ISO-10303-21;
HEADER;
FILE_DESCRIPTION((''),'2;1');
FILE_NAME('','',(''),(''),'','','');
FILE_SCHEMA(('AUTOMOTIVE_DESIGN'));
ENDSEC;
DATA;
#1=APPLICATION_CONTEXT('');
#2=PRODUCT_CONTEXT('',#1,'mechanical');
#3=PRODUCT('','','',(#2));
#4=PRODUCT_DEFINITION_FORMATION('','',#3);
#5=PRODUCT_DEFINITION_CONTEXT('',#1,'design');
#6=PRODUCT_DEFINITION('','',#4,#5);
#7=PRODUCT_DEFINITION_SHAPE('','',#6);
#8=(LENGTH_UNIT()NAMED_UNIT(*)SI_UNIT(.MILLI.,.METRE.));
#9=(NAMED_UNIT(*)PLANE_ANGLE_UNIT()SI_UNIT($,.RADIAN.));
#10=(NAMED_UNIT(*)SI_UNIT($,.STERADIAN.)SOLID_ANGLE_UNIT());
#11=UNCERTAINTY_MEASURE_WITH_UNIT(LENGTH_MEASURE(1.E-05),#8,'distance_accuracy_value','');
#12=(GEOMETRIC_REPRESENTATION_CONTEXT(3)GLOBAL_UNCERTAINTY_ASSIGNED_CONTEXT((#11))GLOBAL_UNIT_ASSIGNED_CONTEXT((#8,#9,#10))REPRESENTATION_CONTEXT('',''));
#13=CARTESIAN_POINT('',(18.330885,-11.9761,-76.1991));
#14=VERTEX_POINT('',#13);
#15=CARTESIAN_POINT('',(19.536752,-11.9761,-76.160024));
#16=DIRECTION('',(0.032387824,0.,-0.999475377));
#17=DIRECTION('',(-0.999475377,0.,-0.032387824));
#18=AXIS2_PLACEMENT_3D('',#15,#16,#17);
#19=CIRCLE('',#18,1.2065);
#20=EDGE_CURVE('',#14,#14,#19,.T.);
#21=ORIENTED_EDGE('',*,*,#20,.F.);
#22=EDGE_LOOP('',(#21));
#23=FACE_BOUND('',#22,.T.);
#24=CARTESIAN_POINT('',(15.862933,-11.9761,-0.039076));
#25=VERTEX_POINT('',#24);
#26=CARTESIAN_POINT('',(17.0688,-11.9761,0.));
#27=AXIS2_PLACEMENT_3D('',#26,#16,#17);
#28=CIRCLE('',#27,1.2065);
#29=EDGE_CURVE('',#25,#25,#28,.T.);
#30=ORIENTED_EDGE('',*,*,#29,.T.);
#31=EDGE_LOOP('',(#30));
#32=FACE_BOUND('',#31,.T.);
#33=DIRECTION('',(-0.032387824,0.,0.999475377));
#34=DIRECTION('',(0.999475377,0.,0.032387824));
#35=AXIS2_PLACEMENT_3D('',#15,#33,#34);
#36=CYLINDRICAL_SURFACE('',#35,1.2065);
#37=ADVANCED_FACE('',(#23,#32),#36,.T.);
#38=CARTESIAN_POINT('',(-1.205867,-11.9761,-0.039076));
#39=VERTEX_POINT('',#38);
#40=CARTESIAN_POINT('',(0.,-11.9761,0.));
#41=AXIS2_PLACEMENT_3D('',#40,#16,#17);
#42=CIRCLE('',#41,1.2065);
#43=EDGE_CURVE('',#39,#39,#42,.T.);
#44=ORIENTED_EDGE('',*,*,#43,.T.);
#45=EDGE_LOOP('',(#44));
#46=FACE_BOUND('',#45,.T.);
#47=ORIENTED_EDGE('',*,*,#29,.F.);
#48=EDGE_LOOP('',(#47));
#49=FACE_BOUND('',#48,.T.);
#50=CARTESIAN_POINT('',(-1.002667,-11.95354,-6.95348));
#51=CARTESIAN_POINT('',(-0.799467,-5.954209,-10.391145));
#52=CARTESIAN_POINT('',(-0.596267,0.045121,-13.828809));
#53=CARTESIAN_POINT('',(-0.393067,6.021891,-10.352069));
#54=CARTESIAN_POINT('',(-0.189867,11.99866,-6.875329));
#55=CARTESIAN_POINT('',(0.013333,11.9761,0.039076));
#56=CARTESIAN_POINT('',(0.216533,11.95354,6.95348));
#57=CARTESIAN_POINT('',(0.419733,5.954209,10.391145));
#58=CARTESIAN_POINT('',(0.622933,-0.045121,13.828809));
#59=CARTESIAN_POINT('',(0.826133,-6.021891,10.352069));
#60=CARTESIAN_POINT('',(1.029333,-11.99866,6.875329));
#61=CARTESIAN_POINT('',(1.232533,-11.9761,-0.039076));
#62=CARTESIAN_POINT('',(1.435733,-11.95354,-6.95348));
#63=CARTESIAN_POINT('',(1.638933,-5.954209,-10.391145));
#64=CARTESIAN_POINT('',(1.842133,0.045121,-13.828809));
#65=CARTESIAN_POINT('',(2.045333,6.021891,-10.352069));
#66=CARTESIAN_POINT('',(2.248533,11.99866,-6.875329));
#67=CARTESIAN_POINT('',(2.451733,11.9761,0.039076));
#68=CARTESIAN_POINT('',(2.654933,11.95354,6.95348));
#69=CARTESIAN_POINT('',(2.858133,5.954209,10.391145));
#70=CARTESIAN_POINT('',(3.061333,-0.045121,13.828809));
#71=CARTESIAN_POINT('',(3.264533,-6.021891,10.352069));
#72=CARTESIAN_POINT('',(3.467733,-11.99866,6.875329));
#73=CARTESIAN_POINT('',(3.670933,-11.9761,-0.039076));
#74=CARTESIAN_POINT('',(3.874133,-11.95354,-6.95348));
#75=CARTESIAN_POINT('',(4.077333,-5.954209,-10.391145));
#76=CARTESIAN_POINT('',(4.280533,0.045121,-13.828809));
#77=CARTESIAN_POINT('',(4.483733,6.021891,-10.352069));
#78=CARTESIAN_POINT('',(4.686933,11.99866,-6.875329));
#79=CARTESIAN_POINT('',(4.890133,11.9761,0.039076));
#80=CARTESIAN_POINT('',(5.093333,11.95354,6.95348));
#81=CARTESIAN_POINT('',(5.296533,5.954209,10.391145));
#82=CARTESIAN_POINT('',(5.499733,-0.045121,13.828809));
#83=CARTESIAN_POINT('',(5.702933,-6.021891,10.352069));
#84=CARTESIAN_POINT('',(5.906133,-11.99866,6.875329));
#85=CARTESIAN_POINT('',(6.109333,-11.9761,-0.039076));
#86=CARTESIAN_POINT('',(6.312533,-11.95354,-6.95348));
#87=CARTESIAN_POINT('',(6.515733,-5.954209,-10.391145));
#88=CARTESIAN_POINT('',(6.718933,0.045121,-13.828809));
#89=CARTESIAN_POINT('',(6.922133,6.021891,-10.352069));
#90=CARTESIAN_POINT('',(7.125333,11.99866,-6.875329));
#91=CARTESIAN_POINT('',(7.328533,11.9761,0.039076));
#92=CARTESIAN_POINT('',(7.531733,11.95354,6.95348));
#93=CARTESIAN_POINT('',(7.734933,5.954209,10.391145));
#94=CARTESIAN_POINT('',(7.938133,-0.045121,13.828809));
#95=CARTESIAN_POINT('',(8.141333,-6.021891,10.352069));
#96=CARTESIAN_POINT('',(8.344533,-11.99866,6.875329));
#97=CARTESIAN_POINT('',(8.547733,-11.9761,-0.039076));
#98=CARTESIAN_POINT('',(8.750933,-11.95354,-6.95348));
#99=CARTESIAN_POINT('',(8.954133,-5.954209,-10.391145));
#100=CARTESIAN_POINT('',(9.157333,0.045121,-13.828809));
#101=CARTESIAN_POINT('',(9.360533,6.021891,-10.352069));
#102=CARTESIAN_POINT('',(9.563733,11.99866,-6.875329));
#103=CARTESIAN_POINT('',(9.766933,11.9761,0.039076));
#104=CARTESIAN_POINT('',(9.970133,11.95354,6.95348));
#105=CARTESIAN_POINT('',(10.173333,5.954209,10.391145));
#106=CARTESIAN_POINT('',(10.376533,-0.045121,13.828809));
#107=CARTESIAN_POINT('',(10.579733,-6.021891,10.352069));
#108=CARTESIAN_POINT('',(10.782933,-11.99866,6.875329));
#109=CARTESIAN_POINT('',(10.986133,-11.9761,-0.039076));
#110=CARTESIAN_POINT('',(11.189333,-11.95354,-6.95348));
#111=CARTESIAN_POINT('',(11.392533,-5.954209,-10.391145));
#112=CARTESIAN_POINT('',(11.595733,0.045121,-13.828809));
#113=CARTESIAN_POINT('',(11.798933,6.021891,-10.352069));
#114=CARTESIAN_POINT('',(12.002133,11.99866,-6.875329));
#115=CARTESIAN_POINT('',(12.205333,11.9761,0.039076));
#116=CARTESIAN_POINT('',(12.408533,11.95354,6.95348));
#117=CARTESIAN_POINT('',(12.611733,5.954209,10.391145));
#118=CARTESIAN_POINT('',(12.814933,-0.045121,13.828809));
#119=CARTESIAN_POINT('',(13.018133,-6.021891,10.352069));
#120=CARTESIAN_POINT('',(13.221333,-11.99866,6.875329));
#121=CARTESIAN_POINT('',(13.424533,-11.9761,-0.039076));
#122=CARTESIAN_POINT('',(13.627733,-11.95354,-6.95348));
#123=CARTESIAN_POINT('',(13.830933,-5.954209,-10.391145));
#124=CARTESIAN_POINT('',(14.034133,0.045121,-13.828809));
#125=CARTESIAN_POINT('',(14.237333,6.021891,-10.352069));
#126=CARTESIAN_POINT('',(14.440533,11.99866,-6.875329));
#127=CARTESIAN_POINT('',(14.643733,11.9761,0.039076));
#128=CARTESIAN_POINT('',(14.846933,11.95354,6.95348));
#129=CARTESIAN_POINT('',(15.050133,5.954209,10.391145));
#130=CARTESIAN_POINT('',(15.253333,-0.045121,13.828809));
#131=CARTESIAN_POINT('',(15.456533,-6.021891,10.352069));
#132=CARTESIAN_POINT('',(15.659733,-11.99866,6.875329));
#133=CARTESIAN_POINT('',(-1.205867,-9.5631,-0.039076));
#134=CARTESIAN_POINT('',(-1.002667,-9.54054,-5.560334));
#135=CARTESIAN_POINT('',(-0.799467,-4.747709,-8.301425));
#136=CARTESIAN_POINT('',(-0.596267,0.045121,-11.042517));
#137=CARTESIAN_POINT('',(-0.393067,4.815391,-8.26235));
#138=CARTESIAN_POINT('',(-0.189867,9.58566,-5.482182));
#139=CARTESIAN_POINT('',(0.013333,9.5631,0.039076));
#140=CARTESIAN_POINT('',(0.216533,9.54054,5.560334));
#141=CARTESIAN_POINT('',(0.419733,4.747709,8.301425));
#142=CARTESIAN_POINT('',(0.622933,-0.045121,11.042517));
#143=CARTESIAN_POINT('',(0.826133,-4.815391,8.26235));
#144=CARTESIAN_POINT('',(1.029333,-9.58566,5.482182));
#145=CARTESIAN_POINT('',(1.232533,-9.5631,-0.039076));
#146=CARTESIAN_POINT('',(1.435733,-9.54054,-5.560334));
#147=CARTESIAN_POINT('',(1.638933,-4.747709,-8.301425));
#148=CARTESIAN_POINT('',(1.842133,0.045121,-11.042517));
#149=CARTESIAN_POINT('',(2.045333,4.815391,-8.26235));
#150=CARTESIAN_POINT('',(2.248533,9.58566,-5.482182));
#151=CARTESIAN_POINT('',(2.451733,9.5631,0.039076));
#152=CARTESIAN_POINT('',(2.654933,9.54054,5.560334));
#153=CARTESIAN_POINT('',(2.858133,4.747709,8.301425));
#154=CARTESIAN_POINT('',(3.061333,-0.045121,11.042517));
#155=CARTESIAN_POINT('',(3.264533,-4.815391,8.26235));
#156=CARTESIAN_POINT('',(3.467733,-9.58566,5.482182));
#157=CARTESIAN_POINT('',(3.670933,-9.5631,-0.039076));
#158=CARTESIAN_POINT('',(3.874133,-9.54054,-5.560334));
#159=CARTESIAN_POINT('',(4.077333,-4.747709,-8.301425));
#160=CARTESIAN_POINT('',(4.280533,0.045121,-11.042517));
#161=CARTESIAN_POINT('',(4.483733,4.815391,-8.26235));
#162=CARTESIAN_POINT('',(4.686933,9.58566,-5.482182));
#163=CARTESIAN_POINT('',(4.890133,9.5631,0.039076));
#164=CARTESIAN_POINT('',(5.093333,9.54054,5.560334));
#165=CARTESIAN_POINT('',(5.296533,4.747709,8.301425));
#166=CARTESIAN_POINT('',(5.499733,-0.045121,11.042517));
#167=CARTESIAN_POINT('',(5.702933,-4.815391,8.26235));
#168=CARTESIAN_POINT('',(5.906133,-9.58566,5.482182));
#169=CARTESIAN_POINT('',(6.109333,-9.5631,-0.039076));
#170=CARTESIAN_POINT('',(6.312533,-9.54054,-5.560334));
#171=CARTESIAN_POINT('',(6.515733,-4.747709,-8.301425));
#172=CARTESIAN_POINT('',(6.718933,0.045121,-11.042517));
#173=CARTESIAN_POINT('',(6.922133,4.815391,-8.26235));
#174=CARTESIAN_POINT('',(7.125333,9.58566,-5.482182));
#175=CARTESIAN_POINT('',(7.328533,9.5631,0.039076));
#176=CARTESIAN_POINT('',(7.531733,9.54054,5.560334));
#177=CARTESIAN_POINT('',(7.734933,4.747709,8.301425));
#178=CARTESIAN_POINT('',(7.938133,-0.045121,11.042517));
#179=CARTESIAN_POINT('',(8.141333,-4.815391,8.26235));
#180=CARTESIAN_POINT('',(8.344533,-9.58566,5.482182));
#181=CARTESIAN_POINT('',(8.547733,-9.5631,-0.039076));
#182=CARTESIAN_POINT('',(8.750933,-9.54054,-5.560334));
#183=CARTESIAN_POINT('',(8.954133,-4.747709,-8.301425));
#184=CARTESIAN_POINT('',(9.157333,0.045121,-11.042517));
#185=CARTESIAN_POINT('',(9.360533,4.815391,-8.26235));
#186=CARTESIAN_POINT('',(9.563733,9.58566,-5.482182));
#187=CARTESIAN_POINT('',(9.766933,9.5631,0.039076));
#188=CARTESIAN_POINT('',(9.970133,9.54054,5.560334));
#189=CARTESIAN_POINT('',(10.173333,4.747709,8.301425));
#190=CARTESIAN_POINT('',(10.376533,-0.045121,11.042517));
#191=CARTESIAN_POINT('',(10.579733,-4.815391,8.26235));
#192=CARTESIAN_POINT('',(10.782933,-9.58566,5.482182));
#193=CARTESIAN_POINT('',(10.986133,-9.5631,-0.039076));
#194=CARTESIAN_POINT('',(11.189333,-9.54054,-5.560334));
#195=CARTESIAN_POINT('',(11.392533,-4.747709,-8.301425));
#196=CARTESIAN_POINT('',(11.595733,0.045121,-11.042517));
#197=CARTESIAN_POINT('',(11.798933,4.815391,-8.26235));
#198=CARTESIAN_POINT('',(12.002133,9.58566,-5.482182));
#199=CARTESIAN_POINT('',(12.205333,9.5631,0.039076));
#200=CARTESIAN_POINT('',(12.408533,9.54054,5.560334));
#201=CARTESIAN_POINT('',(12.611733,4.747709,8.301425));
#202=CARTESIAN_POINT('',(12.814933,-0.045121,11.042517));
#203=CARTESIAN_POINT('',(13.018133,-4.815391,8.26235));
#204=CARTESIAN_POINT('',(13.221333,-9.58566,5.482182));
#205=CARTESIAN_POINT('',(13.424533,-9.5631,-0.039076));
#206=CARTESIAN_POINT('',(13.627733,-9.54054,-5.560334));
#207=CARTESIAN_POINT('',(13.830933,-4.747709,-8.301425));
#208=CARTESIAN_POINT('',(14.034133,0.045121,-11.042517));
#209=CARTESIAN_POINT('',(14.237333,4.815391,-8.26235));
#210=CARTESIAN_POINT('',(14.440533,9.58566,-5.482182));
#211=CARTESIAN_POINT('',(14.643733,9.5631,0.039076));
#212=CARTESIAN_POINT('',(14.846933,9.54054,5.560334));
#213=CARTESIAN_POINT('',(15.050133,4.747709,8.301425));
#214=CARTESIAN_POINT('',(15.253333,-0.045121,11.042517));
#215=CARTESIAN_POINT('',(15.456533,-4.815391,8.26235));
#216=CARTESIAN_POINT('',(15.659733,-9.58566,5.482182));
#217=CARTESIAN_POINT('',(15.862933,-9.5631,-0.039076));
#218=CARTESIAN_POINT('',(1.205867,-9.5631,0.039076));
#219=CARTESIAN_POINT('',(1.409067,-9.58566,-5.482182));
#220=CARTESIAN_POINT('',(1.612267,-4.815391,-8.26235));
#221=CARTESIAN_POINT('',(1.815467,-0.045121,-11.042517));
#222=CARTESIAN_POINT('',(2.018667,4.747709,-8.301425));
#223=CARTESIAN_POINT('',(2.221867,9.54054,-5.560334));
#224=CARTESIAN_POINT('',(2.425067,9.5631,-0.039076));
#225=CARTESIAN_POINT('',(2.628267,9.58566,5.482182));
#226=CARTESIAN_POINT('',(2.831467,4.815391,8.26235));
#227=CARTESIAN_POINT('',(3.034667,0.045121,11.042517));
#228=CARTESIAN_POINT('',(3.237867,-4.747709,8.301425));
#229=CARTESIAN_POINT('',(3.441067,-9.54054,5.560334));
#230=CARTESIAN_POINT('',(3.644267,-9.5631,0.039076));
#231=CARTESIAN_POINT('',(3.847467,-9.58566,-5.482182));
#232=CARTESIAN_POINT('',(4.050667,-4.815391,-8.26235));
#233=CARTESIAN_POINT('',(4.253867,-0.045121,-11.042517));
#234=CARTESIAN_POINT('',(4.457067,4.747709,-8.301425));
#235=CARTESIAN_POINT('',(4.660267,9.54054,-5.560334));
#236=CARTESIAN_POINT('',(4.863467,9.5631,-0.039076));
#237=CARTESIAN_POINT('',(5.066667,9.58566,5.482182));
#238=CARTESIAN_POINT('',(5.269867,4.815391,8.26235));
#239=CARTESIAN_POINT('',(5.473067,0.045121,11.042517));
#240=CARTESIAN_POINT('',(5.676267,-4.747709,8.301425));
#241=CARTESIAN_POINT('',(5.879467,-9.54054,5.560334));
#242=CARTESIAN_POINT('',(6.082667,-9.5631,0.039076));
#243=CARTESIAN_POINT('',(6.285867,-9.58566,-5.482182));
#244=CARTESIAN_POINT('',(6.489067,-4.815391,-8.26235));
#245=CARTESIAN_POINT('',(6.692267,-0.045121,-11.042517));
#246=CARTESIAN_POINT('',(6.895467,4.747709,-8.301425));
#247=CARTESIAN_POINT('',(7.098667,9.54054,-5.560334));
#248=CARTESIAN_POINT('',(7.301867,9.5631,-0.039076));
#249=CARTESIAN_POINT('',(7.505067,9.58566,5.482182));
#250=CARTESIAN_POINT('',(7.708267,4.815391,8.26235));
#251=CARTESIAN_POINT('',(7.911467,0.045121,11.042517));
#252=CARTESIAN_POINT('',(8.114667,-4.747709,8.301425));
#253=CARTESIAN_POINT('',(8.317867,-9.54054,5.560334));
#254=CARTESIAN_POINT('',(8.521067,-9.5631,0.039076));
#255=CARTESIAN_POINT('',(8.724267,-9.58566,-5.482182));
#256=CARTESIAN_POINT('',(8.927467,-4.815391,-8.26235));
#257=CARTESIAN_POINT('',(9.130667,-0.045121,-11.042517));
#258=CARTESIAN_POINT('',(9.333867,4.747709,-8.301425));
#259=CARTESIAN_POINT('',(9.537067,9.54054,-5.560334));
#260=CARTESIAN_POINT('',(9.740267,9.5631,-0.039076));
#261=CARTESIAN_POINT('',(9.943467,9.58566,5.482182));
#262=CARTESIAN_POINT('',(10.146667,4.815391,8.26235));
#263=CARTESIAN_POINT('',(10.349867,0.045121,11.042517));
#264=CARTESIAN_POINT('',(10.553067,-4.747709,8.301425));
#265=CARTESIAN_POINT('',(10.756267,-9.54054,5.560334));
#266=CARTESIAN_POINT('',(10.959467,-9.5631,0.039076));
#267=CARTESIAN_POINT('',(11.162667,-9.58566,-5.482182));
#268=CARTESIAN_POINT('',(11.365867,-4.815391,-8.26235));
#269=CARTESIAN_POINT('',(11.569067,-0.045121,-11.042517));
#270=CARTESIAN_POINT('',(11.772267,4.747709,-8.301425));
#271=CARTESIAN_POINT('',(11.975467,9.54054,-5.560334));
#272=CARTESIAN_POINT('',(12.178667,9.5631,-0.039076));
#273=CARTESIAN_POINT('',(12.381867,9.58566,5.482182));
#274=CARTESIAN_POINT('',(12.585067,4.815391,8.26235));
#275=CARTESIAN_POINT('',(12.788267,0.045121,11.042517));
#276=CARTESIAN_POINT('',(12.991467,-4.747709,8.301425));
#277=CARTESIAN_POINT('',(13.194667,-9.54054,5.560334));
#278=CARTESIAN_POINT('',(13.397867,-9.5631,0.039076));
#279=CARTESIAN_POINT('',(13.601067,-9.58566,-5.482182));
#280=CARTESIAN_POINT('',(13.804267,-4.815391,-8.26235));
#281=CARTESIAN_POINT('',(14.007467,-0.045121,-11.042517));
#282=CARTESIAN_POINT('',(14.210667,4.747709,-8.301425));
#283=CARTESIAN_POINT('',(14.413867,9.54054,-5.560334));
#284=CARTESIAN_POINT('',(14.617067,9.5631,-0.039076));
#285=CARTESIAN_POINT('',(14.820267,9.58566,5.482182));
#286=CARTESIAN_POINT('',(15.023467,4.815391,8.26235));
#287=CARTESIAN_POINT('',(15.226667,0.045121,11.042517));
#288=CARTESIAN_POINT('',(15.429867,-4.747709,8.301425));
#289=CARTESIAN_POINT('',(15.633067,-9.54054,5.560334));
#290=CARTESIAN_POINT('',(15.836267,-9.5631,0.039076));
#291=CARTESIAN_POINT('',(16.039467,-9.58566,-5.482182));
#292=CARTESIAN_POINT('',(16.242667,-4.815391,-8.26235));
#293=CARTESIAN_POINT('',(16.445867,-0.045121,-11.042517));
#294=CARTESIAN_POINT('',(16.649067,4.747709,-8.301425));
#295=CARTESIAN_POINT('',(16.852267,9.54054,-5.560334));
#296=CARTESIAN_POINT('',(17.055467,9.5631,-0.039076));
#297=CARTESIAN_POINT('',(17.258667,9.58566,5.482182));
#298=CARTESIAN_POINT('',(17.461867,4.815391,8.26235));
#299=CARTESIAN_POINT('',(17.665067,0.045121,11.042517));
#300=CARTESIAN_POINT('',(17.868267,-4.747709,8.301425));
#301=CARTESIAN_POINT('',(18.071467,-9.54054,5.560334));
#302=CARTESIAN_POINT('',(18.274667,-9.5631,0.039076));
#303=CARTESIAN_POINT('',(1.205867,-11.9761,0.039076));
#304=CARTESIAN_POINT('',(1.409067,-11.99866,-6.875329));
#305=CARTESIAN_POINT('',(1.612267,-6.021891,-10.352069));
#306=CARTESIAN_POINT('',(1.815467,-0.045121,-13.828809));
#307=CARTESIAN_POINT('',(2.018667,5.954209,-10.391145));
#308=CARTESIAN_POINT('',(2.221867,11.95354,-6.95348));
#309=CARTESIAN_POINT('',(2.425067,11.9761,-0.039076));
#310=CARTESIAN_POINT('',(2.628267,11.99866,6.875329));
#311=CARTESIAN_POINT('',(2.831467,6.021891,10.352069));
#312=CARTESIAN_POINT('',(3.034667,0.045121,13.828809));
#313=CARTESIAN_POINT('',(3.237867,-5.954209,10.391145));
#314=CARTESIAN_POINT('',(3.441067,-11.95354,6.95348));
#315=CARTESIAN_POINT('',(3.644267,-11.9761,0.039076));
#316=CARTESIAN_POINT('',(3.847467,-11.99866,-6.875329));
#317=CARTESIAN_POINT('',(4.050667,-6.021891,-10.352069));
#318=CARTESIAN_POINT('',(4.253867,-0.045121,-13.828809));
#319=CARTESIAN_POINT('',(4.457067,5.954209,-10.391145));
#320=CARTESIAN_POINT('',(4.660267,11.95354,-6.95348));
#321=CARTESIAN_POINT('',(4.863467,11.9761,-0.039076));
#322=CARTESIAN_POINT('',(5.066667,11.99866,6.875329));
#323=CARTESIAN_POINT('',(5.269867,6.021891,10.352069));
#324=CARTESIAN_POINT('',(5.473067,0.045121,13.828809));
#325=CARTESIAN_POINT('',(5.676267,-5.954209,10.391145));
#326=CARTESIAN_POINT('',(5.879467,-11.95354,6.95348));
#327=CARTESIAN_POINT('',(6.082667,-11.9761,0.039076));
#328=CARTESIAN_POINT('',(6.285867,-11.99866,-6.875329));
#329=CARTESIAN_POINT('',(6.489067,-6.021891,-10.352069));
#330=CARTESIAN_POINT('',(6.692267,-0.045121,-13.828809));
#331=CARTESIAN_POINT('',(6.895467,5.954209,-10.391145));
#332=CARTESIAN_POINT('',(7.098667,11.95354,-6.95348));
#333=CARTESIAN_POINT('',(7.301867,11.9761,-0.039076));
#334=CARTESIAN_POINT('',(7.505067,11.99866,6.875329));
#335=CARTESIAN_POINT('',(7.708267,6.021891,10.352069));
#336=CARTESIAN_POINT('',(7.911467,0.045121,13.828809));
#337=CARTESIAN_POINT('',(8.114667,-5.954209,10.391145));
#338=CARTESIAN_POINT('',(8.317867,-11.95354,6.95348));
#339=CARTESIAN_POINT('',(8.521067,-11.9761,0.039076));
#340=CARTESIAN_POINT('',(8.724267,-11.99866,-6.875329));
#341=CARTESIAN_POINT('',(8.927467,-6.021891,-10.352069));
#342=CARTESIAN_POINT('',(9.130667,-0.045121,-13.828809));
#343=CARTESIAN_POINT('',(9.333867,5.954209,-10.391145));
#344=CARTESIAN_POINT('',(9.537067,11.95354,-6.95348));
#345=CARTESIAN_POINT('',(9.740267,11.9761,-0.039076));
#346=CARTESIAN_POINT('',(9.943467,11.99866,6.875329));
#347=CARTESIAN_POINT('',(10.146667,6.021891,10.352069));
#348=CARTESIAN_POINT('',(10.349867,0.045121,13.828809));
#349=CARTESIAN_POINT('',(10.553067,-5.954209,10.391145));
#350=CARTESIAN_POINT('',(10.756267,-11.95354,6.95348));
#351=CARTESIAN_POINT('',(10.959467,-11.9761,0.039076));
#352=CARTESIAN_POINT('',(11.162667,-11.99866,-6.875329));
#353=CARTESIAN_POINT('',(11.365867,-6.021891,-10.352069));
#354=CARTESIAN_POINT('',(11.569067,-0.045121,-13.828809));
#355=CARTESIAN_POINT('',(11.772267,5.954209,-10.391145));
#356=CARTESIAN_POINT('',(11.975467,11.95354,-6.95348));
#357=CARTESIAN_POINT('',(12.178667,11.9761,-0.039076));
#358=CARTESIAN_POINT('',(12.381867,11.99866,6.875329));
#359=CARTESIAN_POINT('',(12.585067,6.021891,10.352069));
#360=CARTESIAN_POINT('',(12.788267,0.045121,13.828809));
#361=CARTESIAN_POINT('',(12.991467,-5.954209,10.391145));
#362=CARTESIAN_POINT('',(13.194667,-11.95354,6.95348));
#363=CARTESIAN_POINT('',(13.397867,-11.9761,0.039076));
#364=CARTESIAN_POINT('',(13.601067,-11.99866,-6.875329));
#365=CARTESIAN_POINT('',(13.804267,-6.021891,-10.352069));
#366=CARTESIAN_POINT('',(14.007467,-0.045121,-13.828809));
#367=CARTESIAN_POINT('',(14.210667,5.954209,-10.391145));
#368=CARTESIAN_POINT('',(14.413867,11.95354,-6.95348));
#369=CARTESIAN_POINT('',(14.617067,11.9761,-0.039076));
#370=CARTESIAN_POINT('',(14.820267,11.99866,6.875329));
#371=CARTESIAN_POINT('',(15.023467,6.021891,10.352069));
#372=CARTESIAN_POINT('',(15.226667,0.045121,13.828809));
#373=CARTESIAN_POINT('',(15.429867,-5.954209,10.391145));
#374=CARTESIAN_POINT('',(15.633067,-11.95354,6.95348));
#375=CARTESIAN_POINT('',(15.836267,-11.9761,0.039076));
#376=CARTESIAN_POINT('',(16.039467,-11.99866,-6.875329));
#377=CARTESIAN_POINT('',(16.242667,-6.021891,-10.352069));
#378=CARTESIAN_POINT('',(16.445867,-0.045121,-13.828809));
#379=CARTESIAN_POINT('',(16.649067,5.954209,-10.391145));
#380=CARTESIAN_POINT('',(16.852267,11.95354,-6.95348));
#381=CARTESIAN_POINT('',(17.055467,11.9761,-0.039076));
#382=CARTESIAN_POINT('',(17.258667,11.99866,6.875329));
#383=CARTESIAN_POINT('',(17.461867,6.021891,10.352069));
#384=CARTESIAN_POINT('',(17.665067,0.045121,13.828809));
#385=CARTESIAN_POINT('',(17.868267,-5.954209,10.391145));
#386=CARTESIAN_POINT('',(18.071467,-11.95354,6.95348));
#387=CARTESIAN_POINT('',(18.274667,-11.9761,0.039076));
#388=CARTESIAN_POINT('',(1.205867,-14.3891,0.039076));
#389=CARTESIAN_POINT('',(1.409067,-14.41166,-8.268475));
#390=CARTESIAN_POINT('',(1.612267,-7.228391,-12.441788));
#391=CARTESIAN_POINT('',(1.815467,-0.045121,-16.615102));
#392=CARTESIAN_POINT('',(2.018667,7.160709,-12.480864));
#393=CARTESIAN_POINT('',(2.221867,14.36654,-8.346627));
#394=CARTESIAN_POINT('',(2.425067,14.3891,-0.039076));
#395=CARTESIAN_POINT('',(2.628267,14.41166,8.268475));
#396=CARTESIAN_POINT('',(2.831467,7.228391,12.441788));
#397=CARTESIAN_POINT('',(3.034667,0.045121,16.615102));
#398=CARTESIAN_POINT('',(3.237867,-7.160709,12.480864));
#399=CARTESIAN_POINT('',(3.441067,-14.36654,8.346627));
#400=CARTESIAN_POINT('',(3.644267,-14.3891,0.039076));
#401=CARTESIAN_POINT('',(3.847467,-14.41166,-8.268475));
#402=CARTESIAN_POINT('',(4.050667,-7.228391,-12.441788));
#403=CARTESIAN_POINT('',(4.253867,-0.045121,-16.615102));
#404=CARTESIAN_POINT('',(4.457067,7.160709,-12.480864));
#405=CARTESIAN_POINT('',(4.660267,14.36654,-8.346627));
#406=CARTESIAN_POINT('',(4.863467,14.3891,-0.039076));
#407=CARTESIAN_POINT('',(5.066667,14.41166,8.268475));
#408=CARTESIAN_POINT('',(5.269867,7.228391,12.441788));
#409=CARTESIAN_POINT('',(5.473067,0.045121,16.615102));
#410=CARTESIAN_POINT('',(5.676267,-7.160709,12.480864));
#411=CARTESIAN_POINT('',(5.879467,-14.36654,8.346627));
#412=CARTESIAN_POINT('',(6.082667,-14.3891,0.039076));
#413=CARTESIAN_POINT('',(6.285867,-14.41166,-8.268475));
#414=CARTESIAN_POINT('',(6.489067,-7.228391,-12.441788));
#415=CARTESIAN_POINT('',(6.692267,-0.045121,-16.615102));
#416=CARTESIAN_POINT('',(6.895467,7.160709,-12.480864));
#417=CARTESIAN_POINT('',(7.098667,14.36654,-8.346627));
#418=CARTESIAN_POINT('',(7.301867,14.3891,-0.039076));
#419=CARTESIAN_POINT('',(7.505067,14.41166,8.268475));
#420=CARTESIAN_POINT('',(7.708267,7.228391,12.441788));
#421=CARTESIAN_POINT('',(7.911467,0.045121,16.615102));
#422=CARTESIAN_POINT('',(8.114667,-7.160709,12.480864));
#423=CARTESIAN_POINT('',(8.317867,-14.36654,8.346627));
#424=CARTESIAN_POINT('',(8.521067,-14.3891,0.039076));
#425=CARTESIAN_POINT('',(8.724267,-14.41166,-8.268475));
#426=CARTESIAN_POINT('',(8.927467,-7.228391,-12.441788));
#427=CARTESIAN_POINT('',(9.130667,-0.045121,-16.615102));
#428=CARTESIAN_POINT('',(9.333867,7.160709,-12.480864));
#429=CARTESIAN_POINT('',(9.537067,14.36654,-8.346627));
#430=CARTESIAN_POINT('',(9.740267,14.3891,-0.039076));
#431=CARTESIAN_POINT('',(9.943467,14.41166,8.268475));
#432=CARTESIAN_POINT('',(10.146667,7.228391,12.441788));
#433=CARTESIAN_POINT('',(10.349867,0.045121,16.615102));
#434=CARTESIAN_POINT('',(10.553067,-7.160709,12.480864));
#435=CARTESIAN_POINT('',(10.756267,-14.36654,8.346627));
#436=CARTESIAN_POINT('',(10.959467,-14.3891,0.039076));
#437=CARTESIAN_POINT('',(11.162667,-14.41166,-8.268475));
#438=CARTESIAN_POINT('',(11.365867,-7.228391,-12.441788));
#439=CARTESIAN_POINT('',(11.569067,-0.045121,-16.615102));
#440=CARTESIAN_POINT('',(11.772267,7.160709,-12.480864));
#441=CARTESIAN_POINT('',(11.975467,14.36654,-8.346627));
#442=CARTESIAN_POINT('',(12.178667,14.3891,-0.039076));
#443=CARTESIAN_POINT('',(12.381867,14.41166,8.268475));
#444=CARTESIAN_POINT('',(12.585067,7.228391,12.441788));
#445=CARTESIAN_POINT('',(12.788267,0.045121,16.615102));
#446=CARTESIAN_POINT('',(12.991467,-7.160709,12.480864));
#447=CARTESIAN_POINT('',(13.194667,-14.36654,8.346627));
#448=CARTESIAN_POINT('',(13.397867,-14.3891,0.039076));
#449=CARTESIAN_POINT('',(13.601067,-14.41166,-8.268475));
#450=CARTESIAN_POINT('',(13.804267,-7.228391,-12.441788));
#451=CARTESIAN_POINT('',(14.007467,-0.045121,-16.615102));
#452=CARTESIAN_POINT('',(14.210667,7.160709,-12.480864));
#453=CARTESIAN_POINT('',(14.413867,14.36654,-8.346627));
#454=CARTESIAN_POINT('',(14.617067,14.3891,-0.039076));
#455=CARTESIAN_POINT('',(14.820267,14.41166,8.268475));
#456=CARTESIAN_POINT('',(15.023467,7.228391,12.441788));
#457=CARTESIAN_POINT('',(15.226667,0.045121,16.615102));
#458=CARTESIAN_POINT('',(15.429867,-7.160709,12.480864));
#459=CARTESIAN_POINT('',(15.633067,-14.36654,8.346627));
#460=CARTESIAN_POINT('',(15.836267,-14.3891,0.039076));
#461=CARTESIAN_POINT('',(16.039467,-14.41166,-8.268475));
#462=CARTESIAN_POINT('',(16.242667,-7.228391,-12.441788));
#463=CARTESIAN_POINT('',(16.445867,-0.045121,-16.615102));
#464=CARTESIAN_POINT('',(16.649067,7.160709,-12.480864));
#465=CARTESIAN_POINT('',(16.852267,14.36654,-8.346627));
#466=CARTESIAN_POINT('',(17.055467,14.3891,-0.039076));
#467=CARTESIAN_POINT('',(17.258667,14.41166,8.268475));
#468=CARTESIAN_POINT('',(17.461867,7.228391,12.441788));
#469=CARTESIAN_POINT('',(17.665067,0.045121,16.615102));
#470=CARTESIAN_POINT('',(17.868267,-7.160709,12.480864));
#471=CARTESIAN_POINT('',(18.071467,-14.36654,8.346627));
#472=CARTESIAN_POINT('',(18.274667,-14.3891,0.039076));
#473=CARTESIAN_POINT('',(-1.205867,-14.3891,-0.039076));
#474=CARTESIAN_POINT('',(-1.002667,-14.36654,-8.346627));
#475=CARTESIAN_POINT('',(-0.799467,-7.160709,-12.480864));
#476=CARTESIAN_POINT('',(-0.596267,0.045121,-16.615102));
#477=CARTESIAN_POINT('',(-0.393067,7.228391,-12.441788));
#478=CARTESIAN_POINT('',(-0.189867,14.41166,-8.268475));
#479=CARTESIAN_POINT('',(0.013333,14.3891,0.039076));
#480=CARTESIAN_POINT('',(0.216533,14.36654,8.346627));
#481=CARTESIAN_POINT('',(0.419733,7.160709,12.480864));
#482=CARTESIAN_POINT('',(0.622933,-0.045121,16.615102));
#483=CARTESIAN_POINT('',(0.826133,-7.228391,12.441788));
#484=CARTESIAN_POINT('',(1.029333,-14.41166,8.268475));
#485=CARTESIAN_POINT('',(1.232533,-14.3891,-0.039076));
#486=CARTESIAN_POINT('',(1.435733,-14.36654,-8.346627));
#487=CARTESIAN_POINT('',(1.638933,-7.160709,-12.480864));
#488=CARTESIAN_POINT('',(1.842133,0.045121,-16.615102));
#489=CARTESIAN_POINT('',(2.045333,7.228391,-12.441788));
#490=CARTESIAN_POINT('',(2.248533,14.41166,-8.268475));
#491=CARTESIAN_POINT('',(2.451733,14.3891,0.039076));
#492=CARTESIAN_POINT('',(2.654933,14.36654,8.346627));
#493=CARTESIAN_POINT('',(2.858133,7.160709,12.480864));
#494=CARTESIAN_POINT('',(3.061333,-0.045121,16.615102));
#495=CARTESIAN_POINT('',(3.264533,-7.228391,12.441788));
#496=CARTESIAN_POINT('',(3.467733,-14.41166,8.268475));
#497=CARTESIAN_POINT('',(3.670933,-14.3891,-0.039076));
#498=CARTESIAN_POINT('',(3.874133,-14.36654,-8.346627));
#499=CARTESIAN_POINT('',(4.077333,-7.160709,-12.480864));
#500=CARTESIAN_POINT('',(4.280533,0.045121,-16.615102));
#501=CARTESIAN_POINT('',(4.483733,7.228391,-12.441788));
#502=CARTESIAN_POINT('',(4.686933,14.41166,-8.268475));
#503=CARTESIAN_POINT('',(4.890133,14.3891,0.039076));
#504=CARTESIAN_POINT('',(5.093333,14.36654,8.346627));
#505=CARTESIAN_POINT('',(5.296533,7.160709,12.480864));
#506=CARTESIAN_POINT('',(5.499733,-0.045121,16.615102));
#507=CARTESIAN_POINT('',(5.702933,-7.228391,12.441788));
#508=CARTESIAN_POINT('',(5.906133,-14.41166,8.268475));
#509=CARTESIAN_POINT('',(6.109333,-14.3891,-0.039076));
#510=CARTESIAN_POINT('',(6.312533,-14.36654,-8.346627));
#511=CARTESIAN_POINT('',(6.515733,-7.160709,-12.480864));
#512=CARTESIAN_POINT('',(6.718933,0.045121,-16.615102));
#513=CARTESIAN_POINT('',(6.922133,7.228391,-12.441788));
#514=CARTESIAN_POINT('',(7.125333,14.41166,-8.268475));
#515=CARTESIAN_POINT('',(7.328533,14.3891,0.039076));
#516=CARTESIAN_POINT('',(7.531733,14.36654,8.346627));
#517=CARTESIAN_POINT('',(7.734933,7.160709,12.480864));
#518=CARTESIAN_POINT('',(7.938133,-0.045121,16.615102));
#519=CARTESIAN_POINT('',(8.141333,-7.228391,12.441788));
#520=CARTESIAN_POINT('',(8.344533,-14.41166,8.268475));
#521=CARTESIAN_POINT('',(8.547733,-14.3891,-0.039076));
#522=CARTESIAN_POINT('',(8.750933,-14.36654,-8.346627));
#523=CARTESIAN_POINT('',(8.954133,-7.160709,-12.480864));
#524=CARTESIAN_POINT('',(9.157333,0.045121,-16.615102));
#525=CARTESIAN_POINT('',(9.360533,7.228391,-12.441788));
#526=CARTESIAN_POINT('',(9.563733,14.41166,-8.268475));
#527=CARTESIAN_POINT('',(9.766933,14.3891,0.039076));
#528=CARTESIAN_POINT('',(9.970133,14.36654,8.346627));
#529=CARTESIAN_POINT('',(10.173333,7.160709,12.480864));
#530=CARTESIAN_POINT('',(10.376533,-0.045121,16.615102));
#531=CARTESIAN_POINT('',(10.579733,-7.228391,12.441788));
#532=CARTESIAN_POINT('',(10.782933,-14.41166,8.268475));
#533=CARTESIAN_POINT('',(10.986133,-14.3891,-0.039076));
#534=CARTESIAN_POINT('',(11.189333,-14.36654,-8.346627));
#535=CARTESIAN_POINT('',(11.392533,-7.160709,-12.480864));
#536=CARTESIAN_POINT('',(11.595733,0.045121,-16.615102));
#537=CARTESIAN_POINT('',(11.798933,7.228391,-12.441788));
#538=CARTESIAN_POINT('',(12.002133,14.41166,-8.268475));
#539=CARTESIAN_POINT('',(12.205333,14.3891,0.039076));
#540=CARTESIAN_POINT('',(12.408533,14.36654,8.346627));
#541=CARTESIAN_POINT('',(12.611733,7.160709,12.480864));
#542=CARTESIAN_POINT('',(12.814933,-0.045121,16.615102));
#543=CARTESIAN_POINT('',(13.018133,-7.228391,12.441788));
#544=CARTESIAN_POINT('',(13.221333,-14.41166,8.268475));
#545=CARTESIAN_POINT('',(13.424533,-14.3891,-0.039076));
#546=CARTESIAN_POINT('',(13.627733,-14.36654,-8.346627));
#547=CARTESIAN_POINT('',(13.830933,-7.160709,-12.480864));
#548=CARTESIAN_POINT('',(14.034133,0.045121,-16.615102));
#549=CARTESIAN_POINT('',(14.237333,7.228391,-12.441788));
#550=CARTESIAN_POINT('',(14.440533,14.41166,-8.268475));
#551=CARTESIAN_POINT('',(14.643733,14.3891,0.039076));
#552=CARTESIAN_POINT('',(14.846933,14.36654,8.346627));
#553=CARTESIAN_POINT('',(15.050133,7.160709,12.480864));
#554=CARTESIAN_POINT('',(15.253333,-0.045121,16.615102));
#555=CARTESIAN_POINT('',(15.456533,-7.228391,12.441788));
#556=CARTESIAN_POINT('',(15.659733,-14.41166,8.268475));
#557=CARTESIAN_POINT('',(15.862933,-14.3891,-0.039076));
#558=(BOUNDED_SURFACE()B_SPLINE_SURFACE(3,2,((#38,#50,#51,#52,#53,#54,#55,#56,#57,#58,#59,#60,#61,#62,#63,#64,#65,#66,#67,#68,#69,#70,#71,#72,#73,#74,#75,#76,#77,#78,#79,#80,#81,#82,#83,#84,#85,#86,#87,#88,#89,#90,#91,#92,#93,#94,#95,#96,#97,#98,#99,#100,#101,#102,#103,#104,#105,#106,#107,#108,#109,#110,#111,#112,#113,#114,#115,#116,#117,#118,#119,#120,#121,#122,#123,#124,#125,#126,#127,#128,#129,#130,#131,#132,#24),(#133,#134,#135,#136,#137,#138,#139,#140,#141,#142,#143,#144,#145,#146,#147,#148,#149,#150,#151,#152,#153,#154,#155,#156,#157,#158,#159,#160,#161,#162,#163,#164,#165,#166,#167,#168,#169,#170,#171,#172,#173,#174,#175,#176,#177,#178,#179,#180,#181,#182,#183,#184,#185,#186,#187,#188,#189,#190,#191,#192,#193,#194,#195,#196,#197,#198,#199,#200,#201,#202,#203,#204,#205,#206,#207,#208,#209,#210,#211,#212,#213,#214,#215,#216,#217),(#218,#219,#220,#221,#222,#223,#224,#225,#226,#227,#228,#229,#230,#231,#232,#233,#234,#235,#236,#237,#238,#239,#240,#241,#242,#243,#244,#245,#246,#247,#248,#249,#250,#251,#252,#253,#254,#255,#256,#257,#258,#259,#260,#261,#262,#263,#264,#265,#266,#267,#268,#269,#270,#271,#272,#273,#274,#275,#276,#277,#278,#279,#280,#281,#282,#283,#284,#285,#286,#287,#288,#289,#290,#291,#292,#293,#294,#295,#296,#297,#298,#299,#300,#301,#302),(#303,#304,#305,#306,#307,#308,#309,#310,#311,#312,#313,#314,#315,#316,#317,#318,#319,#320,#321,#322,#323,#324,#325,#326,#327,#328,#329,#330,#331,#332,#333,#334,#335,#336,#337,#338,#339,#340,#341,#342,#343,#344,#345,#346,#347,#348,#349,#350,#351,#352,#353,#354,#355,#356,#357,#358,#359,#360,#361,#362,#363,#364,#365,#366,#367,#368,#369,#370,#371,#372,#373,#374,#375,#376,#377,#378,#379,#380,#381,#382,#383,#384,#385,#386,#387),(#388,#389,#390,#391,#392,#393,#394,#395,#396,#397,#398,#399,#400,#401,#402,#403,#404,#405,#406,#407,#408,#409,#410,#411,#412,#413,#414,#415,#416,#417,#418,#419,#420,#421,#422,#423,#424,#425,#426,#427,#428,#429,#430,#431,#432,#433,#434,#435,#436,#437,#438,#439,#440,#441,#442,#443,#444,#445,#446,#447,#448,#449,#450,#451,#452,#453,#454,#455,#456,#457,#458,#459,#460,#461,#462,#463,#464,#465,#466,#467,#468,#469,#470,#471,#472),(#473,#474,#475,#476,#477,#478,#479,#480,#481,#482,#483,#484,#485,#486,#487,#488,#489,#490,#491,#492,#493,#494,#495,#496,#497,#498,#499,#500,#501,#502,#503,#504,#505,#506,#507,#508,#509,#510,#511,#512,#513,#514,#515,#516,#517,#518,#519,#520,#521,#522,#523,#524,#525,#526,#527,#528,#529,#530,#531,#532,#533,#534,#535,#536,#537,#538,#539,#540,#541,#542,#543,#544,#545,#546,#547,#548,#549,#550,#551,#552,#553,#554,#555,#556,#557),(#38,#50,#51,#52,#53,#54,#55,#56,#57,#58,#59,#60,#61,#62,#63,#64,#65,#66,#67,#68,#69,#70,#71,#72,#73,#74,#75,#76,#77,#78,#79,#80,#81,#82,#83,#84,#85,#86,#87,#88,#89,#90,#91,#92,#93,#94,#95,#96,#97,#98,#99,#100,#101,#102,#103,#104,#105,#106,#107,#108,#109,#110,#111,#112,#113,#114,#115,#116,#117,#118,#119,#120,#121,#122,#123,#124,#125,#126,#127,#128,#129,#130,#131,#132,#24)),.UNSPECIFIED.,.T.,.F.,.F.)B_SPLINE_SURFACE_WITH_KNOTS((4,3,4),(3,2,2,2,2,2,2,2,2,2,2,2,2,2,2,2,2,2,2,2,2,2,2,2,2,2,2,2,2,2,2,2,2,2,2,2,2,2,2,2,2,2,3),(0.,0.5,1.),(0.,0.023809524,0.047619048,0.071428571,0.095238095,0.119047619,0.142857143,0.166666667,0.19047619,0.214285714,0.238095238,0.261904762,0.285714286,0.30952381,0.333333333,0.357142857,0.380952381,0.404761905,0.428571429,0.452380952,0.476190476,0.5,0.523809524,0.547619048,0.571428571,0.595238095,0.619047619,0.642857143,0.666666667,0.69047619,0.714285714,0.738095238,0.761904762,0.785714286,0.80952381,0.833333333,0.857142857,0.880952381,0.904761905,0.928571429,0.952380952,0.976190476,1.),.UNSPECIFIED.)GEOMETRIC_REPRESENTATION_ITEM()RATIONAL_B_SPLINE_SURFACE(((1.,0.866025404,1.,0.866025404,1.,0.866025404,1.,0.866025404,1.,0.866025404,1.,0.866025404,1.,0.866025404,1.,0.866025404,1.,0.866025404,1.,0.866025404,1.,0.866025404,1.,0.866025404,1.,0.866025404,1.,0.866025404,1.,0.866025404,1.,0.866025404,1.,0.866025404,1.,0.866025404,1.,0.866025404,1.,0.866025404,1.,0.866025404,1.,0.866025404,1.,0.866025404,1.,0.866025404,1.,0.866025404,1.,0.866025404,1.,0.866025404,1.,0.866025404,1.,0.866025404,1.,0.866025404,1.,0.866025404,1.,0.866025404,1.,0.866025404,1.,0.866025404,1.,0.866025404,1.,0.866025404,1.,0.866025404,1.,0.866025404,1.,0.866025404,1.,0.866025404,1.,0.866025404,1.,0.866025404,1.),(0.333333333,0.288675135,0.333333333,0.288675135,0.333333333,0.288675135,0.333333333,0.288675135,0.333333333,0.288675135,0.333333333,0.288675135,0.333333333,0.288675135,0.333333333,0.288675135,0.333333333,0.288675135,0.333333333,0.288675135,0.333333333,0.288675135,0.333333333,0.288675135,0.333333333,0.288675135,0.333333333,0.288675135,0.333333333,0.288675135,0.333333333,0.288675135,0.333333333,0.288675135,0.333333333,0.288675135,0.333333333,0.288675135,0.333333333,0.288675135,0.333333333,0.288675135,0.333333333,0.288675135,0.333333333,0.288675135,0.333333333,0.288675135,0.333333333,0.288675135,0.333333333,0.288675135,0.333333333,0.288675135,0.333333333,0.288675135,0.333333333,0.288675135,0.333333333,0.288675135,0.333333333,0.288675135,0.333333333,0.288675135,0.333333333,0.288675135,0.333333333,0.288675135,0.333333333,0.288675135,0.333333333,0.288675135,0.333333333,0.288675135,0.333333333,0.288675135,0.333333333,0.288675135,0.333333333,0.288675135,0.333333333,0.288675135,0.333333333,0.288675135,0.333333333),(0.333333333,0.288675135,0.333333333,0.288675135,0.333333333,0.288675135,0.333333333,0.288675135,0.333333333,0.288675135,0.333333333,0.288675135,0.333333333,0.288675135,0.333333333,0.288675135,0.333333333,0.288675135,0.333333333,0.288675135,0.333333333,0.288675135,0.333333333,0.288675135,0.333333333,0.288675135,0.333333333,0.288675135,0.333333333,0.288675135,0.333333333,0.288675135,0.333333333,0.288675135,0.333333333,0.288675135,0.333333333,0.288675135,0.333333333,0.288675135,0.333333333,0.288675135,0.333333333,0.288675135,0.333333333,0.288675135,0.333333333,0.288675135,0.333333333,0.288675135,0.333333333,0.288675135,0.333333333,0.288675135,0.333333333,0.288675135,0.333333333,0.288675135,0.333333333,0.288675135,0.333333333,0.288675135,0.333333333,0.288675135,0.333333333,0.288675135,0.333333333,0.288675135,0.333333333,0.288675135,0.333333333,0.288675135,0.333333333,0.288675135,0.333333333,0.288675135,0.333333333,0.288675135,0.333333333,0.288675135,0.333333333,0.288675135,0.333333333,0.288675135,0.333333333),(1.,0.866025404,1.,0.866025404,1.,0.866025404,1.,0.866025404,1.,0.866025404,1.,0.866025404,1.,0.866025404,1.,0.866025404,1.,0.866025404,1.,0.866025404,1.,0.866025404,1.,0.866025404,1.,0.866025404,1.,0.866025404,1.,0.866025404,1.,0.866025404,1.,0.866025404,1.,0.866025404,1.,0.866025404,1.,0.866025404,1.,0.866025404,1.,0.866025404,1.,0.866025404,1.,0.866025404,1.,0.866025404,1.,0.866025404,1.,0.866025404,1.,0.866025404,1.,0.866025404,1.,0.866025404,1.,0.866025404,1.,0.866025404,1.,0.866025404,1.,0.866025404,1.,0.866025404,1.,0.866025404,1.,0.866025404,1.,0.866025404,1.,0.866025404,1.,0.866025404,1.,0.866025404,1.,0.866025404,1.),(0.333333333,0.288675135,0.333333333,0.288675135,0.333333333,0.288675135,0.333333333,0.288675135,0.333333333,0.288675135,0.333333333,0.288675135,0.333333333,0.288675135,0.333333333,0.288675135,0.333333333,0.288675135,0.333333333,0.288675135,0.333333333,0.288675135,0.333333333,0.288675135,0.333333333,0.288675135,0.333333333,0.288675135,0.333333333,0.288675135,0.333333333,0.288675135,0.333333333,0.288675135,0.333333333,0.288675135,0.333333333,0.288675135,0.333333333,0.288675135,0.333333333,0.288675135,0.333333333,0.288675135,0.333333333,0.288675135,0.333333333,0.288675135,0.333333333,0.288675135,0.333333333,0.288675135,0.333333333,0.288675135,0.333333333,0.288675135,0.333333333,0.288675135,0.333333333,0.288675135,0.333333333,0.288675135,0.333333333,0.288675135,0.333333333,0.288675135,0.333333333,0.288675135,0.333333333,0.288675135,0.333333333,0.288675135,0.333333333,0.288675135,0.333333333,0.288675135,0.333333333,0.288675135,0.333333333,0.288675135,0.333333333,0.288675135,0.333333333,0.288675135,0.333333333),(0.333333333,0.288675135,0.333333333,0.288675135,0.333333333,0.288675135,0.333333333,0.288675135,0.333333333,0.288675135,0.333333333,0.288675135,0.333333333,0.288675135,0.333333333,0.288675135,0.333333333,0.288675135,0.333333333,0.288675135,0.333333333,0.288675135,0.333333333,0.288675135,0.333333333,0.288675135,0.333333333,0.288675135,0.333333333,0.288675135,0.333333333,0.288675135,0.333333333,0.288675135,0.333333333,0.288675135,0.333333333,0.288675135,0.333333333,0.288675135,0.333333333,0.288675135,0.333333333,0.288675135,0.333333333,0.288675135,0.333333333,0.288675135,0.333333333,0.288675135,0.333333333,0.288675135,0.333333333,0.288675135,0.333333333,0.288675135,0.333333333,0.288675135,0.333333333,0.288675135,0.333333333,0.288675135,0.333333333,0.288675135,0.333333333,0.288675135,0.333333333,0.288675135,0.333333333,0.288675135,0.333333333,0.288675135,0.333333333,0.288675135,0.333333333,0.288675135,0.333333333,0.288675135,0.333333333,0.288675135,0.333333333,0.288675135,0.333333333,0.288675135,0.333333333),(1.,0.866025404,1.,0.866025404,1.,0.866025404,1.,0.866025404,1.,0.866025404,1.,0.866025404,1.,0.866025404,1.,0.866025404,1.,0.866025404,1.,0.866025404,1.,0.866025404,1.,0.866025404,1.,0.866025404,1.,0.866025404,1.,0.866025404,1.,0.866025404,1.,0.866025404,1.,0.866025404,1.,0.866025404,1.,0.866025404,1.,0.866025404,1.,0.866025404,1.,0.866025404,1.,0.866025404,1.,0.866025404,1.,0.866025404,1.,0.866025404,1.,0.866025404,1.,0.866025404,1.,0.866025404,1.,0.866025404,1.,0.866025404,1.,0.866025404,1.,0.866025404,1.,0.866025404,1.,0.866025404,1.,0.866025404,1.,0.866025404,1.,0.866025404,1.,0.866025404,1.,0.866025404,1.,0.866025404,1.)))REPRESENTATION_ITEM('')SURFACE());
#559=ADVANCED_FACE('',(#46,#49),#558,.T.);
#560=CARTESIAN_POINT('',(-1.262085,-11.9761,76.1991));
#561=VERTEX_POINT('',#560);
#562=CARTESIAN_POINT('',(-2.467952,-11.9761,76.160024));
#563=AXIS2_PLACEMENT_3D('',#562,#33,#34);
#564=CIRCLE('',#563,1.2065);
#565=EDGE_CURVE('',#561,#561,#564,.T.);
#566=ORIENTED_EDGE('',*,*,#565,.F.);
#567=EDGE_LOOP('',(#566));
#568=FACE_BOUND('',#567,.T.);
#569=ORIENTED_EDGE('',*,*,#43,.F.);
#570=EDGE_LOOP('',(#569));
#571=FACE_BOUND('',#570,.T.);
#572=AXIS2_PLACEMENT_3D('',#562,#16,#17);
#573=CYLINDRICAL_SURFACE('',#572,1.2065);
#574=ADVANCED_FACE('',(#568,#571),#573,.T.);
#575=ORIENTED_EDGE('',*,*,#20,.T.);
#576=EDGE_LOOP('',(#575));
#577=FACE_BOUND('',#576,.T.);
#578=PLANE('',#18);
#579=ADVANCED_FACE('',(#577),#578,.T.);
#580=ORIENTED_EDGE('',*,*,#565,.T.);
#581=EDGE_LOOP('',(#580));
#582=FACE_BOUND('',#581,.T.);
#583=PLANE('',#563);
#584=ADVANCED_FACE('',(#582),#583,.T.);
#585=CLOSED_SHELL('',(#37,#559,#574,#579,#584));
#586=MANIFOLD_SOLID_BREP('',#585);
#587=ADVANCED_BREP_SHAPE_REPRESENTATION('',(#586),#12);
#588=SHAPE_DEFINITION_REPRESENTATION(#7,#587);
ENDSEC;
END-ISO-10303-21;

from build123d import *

# Parameters (mm, degrees)
SWEEP1_PITCH   = 2.4384
SKETCH3_R      = 1.2065
EXTRUDE1_DEPTH = 76.2
SKETCH4_R      = 1.2065
EXTRUDE2_DEPTH = 76.2


with BuildPart() as part:
    # Sweep1: the profile of Sketch2 screwed along a right-hand helix of 7 turns, 6 arcs to a turn; built about Z, then put on its axis
    sweep1_z = Axis((0, 0, 0), (0, 0, 1))
    sweep1_corners = [(11.9761, 0.039075909, -1.205867042), (10.7696, 0, 0), (11.9761, -0.039075909, 1.205867042), (13.1826, 0, 0)]
    with BuildLine(mode=Mode.PRIVATE) as sweep1_profile:
        ThreePointArc((11.9761, 0.039075909, -1.205867042), (11.122975668, 0.02763084, -0.852676763), (10.7696, 0, 0))
        ThreePointArc((10.7696, 0, 0), (11.122975668, -0.02763084, 0.852676763), (11.9761, -0.039075909, 1.205867042))
        ThreePointArc((11.9761, -0.039075909, 1.205867042), (12.829224332, -0.02763084, 0.852676763), (13.1826, 0, 0))
        ThreePointArc((13.1826, 0, 0), (12.829224332, 0.02763084, -0.852676763), (11.9761, 0.039075909, -1.205867042))
    sweep1_cap = Face(sweep1_profile.wire())
    sweep1_arcs = [((11.9761, 0.039075909, -1.205867042), (10.7696, 0.039075909, -1.205867042), (10.7696, 0, 0), (1, 0.7071067811865476, 1)), ((10.7696, 0, 0), (10.7696, -0.039075909, 1.205867042), (11.9761, -0.039075909, 1.205867042), (1, 0.7071067811865476, 1)), ((11.9761, -0.039075909, 1.205867042), (13.1826, -0.039075909, 1.205867042), (13.1826, 0, 0), (1, 0.7071067811865476, 1)), ((13.1826, 0, 0), (13.1826, 0.039075909, -1.205867042), (11.9761, 0.039075909, -1.205867042), (1, 0.7071067811865476, 1))]  # start, shoulder, end, weights
    sweep1_turn_angles = [0, 30, 60, 90, 120, 150, 180, 210, 240, 270, 300, 330, 360]
    sweep1_turn_weights = [1, 0.8660254037844387, 1, 0.8660254037844387, 1, 0.8660254037844387, 1, 0.8660254037844387, 1, 0.8660254037844387, 1, 0.8660254037844387, 1]
    sweep1_turn_sides = [Face.make_bezier_surface([[Vector(p[j][0], p[j][1], 0).rotate(sweep1_z, sweep1_turn_angles[2 * i + k]) / sweep1_turn_weights[2 * i + k] + Vector(0, 0, p[j][2] + SWEEP1_PITCH * sweep1_turn_angles[2 * i + k] / 360) for k in range(3)] for j in range(3)], [[p[3][j] * sweep1_turn_weights[2 * i + k] for k in range(3)] for j in range(3)]) for p in sweep1_arcs for i in range(6)]
    sweep1 = Plane(origin=(0, 0, 0), x_dir=(0, -1, 0), z_dir=(1, 0, 0)) * Solid(Shell([*[p.moved(Location((0, 0, SWEEP1_PITCH * i))) for i in range(7) for p in sweep1_turn_sides], sweep1_cap, sweep1_cap.rotate(sweep1_z, 2520).moved(Location((0, 0, SWEEP1_PITCH * 2520 / 360)))]))
    add(sweep1)

    # Sketch3 → Extrude1 (add)
    with BuildSketch(Plane(origin=(0, 0, 0), x_dir=(0.9994753768225242, -2.6702716453456158e-14, 0.032387823722405416), z_dir=(-0.032387823722405416, -1.113113692203512e-14, 0.9994753768225242))):
        with Locations(Location((0, -11.9761, 0), (0, 0, 180))):
            Circle(SKETCH3_R)
    extrude(amount=EXTRUDE1_DEPTH)

    # Sketch4 → Extrude2 (add)
    with BuildSketch(Plane(origin=(0.017904678, 0, -0.552531263), x_dir=(-0.9958066104404691, -0.08560321398081551, -0.03226893799334511), z_dir=(0.032387823722405416, 1.0884132137234381e-13, -0.9994753768225242))):
        with Locations(Location((-15.972031221, -13.392517013, 0), (0, 0, 4.910712917))):
            Circle(SKETCH4_R)
    extrude(amount=EXTRUDE2_DEPTH)


solid = part.part
